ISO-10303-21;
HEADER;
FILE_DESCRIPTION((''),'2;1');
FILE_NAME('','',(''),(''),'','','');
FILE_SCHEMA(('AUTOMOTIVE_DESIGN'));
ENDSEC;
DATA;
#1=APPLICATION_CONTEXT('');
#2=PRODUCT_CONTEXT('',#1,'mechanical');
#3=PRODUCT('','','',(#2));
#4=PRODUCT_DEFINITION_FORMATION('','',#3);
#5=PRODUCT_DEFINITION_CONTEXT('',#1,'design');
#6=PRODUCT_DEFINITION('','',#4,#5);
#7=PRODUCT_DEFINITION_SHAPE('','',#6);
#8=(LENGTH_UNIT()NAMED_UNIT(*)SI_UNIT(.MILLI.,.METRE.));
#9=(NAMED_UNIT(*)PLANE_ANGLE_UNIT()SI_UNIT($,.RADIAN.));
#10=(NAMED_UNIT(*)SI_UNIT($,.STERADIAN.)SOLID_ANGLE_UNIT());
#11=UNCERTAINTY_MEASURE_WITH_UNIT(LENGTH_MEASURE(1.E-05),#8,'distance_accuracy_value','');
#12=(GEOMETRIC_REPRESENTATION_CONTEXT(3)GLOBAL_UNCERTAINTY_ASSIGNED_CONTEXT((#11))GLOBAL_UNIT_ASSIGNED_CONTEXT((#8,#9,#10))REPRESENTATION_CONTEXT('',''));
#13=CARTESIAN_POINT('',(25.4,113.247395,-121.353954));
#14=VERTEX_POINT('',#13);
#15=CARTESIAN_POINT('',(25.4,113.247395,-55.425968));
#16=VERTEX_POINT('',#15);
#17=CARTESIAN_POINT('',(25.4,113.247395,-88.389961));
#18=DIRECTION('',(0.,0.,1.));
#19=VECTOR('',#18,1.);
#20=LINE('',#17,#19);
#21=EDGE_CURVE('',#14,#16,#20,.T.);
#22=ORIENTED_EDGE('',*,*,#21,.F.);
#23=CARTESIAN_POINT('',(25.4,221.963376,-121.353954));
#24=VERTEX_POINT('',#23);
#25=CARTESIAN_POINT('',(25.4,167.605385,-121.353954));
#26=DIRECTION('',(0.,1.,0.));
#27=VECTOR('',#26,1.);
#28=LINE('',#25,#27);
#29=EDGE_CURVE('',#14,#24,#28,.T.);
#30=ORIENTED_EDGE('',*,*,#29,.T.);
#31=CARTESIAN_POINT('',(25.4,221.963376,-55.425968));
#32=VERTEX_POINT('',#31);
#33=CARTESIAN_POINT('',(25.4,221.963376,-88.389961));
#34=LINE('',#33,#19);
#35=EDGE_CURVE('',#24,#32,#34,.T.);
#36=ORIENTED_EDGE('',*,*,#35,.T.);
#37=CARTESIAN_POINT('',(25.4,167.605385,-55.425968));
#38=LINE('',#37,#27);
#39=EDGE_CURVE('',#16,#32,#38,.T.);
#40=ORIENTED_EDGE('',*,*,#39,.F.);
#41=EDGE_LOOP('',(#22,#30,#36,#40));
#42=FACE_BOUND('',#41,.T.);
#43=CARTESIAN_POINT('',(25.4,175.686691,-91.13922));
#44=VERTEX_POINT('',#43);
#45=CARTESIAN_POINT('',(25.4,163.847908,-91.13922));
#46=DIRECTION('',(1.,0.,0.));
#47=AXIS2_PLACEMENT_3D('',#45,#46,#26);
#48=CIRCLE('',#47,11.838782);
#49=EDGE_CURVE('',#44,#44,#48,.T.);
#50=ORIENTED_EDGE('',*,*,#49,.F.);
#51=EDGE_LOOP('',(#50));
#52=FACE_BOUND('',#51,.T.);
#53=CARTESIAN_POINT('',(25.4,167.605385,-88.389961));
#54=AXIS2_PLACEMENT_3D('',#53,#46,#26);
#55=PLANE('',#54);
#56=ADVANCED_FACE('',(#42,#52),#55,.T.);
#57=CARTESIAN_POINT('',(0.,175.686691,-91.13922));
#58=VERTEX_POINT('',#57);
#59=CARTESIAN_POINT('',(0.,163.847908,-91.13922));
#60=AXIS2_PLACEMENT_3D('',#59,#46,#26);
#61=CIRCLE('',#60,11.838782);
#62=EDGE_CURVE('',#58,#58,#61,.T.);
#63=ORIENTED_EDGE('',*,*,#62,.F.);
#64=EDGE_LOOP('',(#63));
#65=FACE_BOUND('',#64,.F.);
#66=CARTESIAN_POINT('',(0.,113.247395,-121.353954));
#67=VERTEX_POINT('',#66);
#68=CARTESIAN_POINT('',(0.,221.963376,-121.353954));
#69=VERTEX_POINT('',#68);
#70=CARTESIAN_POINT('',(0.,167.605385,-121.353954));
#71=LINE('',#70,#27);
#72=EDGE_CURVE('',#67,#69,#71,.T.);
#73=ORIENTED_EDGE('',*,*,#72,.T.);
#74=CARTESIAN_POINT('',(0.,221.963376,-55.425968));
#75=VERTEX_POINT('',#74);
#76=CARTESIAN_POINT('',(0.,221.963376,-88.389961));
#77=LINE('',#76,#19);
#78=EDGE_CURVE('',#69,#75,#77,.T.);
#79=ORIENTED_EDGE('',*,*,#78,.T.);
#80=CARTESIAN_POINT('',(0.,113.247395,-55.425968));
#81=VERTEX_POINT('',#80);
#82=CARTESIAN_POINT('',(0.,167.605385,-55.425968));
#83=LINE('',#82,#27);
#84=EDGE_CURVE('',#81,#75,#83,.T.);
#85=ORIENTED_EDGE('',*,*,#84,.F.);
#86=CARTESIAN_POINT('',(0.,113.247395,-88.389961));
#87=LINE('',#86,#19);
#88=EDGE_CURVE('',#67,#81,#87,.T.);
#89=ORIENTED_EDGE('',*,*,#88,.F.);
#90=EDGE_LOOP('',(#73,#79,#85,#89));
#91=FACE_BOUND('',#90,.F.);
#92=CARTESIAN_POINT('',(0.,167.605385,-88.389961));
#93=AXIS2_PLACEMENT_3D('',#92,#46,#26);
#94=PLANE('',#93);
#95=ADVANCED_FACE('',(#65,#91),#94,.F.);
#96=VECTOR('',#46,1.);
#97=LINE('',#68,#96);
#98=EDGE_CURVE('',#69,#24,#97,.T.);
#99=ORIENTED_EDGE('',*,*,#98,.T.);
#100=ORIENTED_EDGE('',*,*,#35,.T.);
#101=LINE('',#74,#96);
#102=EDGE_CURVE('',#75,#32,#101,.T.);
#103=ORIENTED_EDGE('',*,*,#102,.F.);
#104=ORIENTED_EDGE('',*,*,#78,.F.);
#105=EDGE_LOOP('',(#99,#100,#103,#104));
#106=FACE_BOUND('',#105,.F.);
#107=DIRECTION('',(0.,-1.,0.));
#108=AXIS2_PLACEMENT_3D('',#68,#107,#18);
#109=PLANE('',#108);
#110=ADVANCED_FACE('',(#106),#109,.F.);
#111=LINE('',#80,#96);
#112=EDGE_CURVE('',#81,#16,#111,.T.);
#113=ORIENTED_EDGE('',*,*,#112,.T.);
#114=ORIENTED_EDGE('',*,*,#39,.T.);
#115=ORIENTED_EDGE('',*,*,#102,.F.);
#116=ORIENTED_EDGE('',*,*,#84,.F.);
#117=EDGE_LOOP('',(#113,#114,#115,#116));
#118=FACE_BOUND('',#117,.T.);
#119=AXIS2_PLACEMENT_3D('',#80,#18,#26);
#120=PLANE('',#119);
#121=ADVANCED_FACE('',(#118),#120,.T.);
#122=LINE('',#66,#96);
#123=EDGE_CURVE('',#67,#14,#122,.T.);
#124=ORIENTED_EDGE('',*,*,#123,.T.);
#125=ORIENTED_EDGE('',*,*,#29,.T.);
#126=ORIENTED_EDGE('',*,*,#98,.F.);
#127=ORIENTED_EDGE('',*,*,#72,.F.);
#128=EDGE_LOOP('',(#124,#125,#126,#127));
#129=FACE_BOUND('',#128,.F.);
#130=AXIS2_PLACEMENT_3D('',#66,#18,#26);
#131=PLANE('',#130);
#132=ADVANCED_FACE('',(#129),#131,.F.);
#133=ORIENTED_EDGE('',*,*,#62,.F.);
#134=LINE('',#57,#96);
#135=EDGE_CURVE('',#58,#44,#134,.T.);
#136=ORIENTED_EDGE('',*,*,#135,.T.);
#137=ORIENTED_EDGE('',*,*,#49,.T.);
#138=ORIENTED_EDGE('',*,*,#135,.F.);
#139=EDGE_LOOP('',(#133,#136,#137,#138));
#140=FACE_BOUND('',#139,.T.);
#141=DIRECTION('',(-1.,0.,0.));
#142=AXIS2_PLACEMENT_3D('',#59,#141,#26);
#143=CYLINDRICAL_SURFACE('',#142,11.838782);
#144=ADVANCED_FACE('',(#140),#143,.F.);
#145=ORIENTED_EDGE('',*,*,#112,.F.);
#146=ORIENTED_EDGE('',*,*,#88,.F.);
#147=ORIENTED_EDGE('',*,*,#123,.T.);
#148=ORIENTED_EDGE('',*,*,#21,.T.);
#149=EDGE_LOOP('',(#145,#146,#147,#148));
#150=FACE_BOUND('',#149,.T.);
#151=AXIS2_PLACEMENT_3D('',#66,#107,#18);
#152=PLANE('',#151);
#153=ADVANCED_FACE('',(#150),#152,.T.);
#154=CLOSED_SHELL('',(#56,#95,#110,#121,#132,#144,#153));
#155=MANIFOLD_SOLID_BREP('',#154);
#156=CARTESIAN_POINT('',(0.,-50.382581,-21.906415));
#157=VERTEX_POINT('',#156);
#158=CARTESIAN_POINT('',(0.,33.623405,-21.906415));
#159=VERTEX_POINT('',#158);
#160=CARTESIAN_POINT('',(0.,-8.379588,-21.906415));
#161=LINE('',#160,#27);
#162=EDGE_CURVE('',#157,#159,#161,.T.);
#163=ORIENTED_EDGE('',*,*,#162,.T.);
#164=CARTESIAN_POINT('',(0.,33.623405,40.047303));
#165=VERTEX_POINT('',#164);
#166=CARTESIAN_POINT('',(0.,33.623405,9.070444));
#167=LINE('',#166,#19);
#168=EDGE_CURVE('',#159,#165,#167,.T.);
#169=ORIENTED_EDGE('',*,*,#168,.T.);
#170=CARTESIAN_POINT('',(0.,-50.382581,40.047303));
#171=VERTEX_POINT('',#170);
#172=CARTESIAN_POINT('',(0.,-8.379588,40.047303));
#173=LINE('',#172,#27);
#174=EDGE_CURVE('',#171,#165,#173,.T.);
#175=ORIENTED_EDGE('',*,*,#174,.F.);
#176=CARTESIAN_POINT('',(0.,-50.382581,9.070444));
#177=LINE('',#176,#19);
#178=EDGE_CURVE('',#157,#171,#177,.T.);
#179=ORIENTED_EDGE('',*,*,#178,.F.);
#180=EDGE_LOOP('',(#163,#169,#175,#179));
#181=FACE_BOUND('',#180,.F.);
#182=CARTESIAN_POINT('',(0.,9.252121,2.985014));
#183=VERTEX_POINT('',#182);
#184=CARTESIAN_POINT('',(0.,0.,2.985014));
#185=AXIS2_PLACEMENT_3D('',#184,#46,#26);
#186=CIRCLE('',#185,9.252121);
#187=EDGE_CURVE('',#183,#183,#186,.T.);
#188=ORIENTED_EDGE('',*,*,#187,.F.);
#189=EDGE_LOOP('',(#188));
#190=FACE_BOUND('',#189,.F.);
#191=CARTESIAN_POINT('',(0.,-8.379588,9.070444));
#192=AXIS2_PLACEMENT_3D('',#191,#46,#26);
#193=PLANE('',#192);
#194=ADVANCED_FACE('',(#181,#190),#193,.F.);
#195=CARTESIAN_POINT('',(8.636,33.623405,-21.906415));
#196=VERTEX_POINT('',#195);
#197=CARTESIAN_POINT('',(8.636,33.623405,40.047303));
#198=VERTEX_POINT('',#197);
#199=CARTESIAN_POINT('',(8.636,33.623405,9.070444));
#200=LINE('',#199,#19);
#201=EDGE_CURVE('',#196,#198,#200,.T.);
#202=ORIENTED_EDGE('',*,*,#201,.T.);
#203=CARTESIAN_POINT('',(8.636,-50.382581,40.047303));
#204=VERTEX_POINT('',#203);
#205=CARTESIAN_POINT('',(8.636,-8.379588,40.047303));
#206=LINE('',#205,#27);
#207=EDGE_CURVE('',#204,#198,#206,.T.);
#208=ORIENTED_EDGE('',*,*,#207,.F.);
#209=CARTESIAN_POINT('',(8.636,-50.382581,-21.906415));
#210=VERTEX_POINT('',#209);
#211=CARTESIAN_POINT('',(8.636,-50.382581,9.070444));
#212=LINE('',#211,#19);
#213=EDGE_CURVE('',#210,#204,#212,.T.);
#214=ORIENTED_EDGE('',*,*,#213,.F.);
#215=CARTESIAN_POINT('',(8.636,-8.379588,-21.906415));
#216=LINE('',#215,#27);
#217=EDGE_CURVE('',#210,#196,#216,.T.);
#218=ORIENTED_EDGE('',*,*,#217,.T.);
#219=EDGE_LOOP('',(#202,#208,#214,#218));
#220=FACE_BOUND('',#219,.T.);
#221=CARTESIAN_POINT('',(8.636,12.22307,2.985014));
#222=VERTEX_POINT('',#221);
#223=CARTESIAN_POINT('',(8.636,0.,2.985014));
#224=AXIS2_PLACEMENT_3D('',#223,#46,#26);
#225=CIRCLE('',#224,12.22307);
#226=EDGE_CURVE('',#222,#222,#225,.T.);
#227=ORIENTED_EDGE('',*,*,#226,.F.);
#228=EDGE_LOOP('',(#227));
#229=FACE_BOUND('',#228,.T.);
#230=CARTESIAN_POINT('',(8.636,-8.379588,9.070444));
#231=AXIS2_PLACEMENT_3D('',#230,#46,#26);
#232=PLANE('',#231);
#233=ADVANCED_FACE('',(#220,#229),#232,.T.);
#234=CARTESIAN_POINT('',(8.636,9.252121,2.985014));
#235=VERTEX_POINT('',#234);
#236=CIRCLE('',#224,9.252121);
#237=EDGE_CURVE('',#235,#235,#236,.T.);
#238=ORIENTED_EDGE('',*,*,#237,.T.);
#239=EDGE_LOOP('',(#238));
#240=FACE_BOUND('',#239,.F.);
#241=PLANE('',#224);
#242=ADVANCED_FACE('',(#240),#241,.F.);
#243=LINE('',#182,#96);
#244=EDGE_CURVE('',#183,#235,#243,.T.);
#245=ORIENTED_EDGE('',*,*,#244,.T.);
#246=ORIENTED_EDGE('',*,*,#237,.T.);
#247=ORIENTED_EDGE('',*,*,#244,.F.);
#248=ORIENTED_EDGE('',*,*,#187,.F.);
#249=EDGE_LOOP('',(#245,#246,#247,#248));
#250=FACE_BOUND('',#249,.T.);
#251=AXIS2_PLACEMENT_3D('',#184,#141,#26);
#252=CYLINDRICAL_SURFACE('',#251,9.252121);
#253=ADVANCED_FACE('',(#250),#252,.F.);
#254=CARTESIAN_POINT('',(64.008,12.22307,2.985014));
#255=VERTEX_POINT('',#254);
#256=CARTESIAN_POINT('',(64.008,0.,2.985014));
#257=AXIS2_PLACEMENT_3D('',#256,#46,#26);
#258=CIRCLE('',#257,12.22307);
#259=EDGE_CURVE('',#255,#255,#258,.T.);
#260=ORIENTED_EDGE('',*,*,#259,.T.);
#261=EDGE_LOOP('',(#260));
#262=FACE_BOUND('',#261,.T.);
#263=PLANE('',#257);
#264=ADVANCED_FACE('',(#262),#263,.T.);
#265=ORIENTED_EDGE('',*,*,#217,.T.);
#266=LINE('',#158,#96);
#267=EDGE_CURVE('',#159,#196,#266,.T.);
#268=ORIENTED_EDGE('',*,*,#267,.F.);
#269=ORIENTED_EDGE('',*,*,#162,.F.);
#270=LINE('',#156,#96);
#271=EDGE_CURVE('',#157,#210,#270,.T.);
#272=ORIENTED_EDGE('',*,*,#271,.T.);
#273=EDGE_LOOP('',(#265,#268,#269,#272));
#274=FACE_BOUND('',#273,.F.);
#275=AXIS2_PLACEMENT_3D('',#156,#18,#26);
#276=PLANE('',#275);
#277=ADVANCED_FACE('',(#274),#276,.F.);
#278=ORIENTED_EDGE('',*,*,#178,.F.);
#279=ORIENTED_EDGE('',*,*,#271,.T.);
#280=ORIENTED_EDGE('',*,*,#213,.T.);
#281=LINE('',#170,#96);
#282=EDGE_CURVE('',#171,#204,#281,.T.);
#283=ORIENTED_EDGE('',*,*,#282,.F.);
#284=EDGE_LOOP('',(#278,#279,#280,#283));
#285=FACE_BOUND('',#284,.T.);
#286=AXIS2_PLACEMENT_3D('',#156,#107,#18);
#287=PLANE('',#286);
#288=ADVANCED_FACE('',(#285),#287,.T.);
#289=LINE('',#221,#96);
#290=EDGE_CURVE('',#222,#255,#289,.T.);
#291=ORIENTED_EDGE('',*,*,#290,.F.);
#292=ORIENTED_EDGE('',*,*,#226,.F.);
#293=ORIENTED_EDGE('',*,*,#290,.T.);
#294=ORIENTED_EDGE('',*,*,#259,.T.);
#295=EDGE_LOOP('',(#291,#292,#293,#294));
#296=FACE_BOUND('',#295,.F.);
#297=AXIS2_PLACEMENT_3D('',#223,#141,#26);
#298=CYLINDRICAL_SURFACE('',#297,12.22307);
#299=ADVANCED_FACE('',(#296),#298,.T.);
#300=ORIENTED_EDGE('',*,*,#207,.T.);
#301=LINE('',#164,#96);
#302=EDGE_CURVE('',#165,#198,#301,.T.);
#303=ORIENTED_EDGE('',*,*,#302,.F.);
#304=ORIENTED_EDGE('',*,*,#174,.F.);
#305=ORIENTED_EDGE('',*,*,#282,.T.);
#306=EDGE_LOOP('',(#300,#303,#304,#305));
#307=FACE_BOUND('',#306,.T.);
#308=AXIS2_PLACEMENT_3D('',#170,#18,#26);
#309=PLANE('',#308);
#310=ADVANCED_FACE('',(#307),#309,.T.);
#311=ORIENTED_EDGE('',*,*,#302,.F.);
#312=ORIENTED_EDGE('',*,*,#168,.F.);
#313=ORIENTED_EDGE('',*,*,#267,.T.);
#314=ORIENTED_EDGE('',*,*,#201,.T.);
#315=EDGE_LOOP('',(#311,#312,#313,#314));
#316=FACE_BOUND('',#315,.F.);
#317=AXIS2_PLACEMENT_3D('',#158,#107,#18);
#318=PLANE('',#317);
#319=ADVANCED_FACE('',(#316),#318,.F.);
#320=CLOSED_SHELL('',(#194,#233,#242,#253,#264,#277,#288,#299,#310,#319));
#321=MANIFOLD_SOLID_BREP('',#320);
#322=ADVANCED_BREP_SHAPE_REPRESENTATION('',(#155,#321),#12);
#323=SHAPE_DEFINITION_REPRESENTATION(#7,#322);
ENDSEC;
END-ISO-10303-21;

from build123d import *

# Parameters (mm, degrees)
F3_W     = 84.005985409
F3_H     = 61.9537178427
F3_R     = 9.2521212974
F4_DEPTH = 8.636
F5_R     = 12.2230702702
F6_DEPTH = 55.372
F7_W     = 108.715981245
F7_H     = 65.9279860556
F7_R     = 11.8387821777
F8_DEPTH = 25.4


# Not quite as in the source:
# - the program builds the solid bodies; features that only make, move or delete a surface that nothing else refers to are left out


with BuildPart() as f4:
    # F3 (on face) → F4 (new body)
    with BuildSketch(Plane.YZ):
        with Locations((-8.3795879036, 9.0704439208)):
            Rectangle(F3_W, F3_H)
        with Locations((0, 2.9850138817)):
            Circle(F3_R, mode=Mode.SUBTRACT)
    extrude(amount=F4_DEPTH)

    # F5 (on face) → F6 (join)
    with BuildSketch(Plane.YZ.offset(8.636)):
        with Locations((0, 2.9850138817)):
            Circle(F5_R)
    extrude(amount=F6_DEPTH)


with BuildPart() as f8:
    # F7 (on Right) → F8 (new body)
    with BuildSketch(Plane.YZ):
        with Locations((167.6053851843, -88.389961049)):
            Rectangle(F7_W, F7_H)
        with Locations((163.8479083776, -91.1392197013)):
            Circle(F7_R, mode=Mode.SUBTRACT)
    extrude(amount=F8_DEPTH)


solid = Compound([f4.part, f8.part])
